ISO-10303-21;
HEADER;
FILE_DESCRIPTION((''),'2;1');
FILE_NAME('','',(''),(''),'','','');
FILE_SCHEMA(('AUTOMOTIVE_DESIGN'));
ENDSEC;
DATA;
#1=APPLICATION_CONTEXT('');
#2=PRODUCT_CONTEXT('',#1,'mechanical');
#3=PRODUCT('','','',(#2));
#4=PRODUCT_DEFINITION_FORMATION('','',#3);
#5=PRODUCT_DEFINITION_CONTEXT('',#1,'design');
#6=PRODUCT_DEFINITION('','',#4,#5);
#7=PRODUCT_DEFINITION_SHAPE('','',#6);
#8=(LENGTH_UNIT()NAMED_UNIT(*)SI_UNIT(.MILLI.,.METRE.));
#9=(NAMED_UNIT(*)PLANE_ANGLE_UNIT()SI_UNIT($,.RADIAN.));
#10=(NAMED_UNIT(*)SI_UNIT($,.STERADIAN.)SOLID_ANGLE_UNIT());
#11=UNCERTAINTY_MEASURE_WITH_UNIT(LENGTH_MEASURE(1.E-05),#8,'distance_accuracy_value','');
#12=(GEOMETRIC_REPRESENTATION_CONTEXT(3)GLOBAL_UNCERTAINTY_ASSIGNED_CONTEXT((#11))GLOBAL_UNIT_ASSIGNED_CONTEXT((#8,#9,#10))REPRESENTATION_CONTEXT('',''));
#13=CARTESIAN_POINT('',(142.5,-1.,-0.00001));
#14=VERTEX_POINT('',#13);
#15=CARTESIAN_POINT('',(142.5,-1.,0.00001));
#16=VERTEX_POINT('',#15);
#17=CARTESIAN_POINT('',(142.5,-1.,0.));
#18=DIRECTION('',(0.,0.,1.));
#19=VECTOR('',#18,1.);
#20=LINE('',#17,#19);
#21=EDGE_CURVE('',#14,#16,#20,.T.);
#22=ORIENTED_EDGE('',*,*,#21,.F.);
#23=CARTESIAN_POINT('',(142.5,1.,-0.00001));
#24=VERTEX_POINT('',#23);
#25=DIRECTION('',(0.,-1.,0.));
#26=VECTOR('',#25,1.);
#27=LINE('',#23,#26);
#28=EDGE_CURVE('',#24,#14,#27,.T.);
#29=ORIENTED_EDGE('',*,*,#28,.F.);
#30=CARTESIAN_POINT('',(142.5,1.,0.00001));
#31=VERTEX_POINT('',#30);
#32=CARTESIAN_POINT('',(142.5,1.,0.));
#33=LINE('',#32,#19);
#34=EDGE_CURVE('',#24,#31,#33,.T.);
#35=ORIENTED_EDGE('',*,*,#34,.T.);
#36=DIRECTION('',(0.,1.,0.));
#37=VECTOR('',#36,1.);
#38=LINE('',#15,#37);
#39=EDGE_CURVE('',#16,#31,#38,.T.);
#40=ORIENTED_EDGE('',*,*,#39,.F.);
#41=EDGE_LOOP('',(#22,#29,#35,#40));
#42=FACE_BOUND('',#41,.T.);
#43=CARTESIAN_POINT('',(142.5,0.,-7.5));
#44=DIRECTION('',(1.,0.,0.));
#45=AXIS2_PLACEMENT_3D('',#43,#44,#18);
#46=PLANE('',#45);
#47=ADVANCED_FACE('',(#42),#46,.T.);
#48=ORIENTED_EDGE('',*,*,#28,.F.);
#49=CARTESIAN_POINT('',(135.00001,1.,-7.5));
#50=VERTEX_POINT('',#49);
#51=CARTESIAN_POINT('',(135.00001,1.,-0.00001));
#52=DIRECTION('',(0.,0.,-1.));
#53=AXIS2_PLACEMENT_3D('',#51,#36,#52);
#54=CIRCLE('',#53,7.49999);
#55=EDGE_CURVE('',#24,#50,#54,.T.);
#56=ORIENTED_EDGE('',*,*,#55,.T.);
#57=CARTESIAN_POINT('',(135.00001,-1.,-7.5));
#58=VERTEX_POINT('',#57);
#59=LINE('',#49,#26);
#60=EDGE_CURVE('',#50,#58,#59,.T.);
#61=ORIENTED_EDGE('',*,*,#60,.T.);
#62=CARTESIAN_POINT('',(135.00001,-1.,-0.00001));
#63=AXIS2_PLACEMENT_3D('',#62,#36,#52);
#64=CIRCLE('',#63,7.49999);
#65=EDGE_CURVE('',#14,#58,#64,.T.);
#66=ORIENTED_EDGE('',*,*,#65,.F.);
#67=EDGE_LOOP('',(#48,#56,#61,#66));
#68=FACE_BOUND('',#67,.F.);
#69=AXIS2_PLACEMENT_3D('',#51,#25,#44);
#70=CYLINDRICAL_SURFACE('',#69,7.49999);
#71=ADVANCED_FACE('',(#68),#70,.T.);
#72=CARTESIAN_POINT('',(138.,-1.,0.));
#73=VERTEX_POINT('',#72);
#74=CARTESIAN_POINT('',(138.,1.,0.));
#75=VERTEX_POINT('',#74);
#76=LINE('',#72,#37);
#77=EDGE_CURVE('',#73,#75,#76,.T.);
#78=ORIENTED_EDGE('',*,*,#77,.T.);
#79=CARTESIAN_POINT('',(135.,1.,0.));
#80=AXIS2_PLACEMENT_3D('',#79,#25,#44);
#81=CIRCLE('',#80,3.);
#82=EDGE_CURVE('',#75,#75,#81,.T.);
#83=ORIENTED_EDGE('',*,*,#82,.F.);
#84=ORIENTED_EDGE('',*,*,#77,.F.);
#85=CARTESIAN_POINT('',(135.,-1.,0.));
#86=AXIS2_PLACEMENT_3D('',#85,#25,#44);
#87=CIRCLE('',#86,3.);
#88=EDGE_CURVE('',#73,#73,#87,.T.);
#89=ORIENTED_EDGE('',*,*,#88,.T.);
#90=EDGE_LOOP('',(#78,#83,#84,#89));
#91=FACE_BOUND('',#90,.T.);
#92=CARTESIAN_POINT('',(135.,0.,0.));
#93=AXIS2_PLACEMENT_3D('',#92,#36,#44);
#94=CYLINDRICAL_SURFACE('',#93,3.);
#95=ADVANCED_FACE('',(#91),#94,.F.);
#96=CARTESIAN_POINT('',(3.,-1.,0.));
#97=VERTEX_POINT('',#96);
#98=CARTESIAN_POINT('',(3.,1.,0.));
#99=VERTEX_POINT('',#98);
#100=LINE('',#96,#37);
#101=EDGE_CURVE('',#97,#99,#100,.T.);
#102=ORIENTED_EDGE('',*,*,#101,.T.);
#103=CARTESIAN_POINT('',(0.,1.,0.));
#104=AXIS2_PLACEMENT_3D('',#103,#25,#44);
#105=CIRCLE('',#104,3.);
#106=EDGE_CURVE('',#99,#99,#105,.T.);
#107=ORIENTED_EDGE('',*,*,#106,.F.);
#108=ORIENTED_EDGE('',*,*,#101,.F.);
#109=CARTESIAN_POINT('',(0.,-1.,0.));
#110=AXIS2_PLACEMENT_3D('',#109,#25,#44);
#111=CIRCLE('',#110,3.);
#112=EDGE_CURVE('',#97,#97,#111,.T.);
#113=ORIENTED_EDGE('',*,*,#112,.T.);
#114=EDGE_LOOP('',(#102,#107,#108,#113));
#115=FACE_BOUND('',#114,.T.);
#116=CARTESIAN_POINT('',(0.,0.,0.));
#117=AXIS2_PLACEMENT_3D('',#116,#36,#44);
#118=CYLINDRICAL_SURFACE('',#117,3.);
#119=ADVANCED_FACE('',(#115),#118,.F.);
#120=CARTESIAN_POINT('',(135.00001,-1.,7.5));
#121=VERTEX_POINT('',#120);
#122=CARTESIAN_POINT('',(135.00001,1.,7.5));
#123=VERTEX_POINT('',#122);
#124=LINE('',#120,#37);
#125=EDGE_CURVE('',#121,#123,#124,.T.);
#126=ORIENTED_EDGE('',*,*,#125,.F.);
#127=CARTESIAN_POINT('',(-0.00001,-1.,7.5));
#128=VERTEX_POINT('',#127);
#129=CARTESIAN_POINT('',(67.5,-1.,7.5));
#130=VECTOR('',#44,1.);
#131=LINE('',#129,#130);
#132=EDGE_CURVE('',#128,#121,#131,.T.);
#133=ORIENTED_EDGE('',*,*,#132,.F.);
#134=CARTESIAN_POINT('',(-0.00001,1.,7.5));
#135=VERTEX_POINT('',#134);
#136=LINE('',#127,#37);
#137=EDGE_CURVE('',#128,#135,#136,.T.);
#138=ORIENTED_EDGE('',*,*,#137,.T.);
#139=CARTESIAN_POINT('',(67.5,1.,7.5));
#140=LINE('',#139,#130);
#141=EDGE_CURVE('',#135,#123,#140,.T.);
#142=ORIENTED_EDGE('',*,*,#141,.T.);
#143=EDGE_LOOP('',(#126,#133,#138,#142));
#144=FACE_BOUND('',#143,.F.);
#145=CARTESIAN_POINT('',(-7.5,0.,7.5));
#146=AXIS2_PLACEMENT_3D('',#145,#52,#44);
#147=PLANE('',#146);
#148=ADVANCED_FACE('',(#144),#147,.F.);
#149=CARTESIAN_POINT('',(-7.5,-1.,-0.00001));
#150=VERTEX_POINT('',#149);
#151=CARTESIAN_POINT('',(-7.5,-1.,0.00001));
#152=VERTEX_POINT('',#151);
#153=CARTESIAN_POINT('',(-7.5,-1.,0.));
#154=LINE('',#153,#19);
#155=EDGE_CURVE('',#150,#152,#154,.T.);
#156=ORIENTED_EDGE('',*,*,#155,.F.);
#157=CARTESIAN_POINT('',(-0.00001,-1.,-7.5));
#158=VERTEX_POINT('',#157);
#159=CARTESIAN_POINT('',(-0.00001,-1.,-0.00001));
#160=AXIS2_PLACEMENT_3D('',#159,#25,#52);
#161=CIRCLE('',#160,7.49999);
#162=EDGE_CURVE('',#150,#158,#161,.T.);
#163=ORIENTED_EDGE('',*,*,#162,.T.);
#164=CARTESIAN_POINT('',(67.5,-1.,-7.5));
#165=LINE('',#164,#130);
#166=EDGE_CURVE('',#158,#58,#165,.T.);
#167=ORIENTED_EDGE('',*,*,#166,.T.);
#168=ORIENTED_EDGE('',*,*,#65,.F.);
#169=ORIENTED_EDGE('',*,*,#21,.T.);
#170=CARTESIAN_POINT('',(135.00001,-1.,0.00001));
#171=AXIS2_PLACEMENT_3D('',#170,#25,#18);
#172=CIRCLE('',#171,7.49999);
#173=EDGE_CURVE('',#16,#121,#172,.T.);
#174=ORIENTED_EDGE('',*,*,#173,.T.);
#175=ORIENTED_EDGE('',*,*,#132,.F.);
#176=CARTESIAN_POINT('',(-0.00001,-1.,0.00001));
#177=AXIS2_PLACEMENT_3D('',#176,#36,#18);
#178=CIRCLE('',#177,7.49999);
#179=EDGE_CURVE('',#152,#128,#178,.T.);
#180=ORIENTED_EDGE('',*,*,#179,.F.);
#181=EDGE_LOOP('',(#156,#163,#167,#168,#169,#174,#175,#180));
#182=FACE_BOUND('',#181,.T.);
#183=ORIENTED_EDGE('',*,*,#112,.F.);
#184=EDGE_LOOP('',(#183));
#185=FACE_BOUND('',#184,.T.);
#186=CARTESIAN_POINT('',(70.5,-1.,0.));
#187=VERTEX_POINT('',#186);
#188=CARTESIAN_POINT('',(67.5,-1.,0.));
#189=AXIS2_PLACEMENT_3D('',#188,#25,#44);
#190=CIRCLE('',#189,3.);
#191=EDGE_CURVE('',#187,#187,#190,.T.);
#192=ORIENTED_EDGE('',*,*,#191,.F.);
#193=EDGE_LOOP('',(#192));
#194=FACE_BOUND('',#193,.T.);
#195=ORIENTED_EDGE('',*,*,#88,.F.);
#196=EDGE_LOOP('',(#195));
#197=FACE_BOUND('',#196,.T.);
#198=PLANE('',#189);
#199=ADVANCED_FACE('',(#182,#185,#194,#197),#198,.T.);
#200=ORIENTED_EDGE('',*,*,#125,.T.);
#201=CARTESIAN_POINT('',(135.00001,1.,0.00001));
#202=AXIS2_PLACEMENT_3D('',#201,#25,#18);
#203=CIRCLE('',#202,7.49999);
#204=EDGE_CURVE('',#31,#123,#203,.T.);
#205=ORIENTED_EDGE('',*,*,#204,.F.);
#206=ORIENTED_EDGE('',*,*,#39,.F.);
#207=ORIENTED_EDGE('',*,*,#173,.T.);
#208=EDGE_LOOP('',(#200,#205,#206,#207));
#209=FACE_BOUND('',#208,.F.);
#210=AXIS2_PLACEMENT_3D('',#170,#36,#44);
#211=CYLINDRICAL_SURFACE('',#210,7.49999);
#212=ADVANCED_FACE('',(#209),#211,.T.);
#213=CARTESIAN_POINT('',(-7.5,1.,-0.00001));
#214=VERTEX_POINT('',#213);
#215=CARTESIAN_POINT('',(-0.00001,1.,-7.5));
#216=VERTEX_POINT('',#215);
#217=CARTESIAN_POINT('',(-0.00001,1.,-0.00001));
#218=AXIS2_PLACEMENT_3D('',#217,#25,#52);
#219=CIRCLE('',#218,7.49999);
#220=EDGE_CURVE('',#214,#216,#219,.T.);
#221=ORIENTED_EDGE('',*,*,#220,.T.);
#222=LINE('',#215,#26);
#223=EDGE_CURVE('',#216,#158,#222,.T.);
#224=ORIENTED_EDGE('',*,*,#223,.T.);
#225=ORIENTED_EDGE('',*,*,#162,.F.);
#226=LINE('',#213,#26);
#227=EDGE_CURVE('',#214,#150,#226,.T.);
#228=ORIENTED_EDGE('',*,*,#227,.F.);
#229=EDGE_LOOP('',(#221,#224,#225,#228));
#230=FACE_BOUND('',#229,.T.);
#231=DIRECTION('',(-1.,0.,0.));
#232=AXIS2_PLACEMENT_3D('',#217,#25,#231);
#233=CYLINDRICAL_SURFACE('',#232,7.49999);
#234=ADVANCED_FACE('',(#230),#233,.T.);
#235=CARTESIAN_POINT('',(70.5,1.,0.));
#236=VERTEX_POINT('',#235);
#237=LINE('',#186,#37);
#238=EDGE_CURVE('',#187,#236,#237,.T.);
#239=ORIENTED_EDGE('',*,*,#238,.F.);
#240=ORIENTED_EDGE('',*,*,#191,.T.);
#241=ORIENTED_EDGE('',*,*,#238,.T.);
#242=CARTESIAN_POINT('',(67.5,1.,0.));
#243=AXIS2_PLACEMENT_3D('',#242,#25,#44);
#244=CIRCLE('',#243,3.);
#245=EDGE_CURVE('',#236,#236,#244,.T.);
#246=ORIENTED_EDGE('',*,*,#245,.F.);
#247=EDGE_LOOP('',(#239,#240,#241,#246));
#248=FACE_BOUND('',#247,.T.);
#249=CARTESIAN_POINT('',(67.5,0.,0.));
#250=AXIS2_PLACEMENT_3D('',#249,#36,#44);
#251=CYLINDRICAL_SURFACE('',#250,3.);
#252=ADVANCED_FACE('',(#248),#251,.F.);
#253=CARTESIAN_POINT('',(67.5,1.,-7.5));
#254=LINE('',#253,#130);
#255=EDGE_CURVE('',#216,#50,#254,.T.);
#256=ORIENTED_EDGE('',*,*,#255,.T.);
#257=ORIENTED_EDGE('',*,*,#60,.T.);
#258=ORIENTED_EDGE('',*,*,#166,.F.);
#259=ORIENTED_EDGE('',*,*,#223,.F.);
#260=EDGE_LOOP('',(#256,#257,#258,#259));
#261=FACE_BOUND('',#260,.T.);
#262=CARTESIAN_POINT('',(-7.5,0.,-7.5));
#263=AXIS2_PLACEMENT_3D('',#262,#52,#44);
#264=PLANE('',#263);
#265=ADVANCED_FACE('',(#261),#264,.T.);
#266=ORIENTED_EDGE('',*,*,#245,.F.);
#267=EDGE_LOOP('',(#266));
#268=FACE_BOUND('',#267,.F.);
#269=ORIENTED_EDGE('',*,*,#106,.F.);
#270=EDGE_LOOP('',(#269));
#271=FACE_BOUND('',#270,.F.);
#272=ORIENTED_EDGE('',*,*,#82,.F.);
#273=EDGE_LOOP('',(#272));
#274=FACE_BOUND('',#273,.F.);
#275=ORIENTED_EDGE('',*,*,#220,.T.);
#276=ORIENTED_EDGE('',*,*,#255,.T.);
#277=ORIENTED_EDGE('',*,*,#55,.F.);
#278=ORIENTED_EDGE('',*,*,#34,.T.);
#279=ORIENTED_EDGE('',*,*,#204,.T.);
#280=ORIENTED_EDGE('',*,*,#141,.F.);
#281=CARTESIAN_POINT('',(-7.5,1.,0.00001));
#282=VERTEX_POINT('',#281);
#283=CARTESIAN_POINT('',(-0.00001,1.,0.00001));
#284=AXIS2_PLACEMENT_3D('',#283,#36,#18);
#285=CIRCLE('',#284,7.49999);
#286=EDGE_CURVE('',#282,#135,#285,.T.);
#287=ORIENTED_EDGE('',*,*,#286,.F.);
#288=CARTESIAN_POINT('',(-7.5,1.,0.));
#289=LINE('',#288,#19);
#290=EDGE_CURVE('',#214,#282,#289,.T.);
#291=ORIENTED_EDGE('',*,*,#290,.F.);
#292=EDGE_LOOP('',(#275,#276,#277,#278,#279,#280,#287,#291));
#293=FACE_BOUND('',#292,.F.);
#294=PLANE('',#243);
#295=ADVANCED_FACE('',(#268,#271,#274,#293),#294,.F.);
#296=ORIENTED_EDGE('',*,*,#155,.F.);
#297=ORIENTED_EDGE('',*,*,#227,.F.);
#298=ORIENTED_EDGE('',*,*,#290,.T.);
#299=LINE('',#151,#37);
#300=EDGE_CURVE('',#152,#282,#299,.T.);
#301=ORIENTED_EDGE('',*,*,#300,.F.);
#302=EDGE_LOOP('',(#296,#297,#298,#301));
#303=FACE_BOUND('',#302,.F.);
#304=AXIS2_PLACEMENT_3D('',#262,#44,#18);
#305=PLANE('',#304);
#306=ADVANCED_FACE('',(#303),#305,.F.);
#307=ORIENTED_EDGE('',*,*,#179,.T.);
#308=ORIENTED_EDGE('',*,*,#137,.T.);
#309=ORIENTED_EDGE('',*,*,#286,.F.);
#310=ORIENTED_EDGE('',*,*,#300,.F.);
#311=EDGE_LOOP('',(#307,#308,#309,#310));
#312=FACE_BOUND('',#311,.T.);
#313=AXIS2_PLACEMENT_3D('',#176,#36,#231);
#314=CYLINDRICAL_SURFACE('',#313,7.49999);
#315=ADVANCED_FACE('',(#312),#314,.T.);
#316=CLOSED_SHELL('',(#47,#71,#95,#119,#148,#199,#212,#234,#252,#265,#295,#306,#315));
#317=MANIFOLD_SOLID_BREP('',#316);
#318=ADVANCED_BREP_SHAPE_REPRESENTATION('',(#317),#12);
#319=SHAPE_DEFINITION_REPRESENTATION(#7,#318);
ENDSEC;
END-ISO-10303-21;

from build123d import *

# Parameters (mm, degrees)
F0_W     = 150
F0_H     = 15
F0_R     = 3
F1_DEPTH = 1
F2_R     = 7.49999


# Not quite as in the source:
# - a fillet or chamfer is up to 0.001 mm smaller than in the source, because OpenCascade refuses the exact size


with BuildPart() as f1:
    # F0 (on Front) → F1 (new body, symmetric)
    with BuildSketch(Plane.XZ):
        with Locations((67.5, 0)):
            Rectangle(F0_W, F0_H)
        Circle(F0_R, mode=Mode.SUBTRACT)
        with Locations((67.5, 0)):
            Circle(F0_R, mode=Mode.SUBTRACT)
        with Locations((135, 0)):
            Circle(F0_R, mode=Mode.SUBTRACT)
    extrude(amount=F1_DEPTH, both=True)

    # F2 (radius 7.5 in the source; OpenCascade refuses exactly that, so slightly less here)
    f2_edges = [f1.edges().sort_by_distance(p)[0] for p in [
        (142.5, 0, 7.5),
        (142.5, 0, -7.5),
        (-7.5, 0, 7.5),
        (-7.5, 0, -7.5),
    ]]
    fillet(f2_edges, radius=F2_R)


solid = f1.part
